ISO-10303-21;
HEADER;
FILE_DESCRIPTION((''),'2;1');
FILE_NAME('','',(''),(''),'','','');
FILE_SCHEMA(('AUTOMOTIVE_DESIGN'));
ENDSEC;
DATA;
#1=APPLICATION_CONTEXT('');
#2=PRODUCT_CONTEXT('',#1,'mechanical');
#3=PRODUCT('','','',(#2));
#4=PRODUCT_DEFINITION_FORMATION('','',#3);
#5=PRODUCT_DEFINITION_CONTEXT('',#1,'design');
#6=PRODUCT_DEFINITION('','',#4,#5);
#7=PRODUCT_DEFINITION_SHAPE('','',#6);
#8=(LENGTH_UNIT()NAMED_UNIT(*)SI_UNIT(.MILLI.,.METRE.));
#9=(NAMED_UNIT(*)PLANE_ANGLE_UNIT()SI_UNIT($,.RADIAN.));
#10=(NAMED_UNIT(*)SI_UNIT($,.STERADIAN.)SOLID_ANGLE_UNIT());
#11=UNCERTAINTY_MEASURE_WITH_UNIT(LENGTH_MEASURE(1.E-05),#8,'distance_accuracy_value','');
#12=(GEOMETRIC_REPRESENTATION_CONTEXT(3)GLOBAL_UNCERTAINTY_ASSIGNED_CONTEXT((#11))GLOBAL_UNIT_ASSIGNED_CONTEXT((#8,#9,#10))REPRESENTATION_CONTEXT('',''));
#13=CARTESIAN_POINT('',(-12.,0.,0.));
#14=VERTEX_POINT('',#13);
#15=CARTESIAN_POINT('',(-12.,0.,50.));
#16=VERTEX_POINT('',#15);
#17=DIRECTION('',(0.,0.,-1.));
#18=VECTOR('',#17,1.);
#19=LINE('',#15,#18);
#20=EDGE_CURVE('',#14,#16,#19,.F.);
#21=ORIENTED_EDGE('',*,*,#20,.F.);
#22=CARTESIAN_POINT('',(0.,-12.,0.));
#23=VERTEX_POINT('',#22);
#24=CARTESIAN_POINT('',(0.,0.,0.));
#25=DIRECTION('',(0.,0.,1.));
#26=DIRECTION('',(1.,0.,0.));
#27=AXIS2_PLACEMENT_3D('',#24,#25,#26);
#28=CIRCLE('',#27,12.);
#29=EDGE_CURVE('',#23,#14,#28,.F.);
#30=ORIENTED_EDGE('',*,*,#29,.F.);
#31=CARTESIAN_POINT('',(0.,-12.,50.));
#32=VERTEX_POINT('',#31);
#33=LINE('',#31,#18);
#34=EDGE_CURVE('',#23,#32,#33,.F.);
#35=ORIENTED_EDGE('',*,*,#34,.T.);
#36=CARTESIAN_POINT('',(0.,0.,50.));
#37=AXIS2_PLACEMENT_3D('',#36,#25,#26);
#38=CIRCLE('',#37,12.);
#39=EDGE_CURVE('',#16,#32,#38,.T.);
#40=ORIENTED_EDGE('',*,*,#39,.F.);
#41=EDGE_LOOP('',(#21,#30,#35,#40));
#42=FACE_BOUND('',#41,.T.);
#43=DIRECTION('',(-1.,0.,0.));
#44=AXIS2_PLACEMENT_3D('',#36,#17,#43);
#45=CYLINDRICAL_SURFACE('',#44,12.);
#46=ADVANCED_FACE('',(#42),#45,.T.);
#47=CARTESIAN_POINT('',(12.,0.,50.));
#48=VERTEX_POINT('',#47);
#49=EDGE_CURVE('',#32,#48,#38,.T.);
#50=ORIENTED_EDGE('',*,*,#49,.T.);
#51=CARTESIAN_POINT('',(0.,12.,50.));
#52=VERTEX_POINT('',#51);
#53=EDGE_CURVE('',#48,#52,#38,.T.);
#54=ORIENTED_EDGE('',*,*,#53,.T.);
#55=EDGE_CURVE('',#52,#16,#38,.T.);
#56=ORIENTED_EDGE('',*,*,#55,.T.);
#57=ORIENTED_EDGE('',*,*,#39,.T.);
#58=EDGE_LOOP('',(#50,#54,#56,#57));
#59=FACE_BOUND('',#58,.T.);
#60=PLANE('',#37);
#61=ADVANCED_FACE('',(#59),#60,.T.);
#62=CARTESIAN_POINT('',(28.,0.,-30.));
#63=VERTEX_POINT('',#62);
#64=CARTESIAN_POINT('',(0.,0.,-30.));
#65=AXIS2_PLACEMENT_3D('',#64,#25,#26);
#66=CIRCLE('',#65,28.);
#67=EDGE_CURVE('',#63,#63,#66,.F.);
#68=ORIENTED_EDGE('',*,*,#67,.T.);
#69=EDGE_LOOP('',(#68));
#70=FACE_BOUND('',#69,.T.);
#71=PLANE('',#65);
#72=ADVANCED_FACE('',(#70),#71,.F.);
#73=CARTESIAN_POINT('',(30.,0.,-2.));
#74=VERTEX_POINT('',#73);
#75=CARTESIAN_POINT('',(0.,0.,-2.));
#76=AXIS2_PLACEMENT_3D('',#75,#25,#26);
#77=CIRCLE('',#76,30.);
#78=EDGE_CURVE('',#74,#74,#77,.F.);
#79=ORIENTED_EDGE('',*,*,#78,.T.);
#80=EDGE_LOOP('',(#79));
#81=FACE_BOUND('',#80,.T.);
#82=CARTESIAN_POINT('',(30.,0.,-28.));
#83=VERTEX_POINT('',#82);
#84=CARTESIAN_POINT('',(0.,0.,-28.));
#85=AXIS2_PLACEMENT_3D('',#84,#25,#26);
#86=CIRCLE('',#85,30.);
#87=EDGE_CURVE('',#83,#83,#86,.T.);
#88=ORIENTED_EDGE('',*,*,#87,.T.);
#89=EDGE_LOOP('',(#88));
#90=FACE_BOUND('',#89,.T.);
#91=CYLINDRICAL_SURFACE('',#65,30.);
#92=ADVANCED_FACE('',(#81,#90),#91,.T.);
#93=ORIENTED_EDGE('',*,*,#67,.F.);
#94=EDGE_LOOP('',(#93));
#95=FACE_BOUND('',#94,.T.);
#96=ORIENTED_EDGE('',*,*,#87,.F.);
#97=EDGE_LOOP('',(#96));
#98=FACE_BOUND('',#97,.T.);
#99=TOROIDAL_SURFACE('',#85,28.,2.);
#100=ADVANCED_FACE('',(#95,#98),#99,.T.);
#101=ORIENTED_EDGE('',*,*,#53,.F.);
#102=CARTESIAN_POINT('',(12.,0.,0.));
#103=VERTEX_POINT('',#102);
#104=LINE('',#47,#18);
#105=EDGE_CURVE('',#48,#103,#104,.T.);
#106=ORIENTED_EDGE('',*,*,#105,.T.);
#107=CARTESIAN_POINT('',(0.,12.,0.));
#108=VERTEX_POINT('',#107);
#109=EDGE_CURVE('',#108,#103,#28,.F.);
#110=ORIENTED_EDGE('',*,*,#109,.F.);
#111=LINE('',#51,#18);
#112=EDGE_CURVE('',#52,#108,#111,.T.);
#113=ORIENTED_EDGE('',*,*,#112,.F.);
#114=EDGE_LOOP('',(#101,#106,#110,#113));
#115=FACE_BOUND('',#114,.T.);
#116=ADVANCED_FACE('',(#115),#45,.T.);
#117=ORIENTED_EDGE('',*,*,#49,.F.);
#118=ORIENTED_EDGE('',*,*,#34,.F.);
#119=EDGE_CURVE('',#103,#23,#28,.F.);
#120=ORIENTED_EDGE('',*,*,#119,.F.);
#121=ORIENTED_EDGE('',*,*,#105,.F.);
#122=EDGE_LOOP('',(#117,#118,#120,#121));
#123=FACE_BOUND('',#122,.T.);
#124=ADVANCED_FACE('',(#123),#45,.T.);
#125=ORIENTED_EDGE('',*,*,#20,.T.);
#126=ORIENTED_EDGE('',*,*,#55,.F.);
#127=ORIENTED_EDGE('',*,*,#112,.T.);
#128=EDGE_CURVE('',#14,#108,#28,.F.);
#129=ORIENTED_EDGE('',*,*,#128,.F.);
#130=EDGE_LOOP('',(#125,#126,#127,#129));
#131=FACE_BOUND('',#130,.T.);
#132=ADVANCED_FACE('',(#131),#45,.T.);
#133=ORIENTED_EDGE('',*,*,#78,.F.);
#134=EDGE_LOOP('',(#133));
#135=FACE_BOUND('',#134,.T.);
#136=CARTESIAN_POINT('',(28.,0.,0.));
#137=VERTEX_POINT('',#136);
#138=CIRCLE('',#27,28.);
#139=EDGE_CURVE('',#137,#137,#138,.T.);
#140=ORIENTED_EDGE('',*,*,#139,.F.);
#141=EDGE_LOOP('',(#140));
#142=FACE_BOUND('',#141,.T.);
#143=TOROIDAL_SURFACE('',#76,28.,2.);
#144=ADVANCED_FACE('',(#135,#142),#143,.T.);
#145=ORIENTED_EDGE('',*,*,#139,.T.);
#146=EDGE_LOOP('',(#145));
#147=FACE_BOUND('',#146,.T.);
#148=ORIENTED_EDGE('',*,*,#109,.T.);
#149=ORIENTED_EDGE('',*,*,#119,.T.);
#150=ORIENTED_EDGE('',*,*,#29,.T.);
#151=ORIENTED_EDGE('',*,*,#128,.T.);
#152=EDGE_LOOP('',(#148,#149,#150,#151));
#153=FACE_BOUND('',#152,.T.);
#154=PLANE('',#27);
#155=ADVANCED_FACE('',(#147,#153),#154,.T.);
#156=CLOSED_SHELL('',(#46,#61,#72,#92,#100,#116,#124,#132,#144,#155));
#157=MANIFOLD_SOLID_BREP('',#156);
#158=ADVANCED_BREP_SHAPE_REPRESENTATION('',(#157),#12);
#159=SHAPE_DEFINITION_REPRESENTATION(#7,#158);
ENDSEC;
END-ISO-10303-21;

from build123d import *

# Parameters (mm, degrees)
ESQUISSE1_W        = 24
ESQUISSE1_H        = 24
BOSS_EXTRU_1_DEPTH = 50
ESQUISSE2_R        = 2.5
BOSS_EXTRU_3_DEPTH = 30
ESQUISSE3_R        = 30
BOSS_EXTRU_4_DEPTH = 30
CONG_1_R           = 2
CONG_2_R           = 2
CONG_3_R           = 12


with BuildPart() as part:
    # Esquisse1 → Boss.-Extru.1 (new body)
    with BuildSketch(Plane.XY):
        Rectangle(ESQUISSE1_W, ESQUISSE1_H)
    extrude(amount=BOSS_EXTRU_1_DEPTH)

    # Esquisse2 → Boss.-Extru.3 (add)
    with BuildSketch(Plane.XY):
        Circle(ESQUISSE2_R)
    extrude(amount=-BOSS_EXTRU_3_DEPTH)

    # Esquisse3 → Boss.-Extru.4 (add)
    with BuildSketch(Plane.XY):
        Circle(ESQUISSE3_R)
    extrude(amount=-BOSS_EXTRU_4_DEPTH)

    # Congé1
    cong_1_edges = [part.edges().sort_by_distance(p)[0] for p in [
        (-30, 0, -30),
    ]]
    fillet(cong_1_edges, radius=CONG_1_R)

    # Congé2
    cong_2_edges = [part.edges().sort_by_distance(p)[0] for p in [
        (-30, 0, 0),
    ]]
    fillet(cong_2_edges, radius=CONG_2_R)

    # Congé3
    cong_3_edges = [part.edges().sort_by_distance(p)[0] for p in [
        (-12, 12, 25),
        (12, 12, 25),
        (12, -12, 25),
        (-12, -12, 25),
    ]]
    fillet(cong_3_edges, radius=CONG_3_R - 0.0001)  # a hair under: the kernel refuses the full size


solid = part.part
